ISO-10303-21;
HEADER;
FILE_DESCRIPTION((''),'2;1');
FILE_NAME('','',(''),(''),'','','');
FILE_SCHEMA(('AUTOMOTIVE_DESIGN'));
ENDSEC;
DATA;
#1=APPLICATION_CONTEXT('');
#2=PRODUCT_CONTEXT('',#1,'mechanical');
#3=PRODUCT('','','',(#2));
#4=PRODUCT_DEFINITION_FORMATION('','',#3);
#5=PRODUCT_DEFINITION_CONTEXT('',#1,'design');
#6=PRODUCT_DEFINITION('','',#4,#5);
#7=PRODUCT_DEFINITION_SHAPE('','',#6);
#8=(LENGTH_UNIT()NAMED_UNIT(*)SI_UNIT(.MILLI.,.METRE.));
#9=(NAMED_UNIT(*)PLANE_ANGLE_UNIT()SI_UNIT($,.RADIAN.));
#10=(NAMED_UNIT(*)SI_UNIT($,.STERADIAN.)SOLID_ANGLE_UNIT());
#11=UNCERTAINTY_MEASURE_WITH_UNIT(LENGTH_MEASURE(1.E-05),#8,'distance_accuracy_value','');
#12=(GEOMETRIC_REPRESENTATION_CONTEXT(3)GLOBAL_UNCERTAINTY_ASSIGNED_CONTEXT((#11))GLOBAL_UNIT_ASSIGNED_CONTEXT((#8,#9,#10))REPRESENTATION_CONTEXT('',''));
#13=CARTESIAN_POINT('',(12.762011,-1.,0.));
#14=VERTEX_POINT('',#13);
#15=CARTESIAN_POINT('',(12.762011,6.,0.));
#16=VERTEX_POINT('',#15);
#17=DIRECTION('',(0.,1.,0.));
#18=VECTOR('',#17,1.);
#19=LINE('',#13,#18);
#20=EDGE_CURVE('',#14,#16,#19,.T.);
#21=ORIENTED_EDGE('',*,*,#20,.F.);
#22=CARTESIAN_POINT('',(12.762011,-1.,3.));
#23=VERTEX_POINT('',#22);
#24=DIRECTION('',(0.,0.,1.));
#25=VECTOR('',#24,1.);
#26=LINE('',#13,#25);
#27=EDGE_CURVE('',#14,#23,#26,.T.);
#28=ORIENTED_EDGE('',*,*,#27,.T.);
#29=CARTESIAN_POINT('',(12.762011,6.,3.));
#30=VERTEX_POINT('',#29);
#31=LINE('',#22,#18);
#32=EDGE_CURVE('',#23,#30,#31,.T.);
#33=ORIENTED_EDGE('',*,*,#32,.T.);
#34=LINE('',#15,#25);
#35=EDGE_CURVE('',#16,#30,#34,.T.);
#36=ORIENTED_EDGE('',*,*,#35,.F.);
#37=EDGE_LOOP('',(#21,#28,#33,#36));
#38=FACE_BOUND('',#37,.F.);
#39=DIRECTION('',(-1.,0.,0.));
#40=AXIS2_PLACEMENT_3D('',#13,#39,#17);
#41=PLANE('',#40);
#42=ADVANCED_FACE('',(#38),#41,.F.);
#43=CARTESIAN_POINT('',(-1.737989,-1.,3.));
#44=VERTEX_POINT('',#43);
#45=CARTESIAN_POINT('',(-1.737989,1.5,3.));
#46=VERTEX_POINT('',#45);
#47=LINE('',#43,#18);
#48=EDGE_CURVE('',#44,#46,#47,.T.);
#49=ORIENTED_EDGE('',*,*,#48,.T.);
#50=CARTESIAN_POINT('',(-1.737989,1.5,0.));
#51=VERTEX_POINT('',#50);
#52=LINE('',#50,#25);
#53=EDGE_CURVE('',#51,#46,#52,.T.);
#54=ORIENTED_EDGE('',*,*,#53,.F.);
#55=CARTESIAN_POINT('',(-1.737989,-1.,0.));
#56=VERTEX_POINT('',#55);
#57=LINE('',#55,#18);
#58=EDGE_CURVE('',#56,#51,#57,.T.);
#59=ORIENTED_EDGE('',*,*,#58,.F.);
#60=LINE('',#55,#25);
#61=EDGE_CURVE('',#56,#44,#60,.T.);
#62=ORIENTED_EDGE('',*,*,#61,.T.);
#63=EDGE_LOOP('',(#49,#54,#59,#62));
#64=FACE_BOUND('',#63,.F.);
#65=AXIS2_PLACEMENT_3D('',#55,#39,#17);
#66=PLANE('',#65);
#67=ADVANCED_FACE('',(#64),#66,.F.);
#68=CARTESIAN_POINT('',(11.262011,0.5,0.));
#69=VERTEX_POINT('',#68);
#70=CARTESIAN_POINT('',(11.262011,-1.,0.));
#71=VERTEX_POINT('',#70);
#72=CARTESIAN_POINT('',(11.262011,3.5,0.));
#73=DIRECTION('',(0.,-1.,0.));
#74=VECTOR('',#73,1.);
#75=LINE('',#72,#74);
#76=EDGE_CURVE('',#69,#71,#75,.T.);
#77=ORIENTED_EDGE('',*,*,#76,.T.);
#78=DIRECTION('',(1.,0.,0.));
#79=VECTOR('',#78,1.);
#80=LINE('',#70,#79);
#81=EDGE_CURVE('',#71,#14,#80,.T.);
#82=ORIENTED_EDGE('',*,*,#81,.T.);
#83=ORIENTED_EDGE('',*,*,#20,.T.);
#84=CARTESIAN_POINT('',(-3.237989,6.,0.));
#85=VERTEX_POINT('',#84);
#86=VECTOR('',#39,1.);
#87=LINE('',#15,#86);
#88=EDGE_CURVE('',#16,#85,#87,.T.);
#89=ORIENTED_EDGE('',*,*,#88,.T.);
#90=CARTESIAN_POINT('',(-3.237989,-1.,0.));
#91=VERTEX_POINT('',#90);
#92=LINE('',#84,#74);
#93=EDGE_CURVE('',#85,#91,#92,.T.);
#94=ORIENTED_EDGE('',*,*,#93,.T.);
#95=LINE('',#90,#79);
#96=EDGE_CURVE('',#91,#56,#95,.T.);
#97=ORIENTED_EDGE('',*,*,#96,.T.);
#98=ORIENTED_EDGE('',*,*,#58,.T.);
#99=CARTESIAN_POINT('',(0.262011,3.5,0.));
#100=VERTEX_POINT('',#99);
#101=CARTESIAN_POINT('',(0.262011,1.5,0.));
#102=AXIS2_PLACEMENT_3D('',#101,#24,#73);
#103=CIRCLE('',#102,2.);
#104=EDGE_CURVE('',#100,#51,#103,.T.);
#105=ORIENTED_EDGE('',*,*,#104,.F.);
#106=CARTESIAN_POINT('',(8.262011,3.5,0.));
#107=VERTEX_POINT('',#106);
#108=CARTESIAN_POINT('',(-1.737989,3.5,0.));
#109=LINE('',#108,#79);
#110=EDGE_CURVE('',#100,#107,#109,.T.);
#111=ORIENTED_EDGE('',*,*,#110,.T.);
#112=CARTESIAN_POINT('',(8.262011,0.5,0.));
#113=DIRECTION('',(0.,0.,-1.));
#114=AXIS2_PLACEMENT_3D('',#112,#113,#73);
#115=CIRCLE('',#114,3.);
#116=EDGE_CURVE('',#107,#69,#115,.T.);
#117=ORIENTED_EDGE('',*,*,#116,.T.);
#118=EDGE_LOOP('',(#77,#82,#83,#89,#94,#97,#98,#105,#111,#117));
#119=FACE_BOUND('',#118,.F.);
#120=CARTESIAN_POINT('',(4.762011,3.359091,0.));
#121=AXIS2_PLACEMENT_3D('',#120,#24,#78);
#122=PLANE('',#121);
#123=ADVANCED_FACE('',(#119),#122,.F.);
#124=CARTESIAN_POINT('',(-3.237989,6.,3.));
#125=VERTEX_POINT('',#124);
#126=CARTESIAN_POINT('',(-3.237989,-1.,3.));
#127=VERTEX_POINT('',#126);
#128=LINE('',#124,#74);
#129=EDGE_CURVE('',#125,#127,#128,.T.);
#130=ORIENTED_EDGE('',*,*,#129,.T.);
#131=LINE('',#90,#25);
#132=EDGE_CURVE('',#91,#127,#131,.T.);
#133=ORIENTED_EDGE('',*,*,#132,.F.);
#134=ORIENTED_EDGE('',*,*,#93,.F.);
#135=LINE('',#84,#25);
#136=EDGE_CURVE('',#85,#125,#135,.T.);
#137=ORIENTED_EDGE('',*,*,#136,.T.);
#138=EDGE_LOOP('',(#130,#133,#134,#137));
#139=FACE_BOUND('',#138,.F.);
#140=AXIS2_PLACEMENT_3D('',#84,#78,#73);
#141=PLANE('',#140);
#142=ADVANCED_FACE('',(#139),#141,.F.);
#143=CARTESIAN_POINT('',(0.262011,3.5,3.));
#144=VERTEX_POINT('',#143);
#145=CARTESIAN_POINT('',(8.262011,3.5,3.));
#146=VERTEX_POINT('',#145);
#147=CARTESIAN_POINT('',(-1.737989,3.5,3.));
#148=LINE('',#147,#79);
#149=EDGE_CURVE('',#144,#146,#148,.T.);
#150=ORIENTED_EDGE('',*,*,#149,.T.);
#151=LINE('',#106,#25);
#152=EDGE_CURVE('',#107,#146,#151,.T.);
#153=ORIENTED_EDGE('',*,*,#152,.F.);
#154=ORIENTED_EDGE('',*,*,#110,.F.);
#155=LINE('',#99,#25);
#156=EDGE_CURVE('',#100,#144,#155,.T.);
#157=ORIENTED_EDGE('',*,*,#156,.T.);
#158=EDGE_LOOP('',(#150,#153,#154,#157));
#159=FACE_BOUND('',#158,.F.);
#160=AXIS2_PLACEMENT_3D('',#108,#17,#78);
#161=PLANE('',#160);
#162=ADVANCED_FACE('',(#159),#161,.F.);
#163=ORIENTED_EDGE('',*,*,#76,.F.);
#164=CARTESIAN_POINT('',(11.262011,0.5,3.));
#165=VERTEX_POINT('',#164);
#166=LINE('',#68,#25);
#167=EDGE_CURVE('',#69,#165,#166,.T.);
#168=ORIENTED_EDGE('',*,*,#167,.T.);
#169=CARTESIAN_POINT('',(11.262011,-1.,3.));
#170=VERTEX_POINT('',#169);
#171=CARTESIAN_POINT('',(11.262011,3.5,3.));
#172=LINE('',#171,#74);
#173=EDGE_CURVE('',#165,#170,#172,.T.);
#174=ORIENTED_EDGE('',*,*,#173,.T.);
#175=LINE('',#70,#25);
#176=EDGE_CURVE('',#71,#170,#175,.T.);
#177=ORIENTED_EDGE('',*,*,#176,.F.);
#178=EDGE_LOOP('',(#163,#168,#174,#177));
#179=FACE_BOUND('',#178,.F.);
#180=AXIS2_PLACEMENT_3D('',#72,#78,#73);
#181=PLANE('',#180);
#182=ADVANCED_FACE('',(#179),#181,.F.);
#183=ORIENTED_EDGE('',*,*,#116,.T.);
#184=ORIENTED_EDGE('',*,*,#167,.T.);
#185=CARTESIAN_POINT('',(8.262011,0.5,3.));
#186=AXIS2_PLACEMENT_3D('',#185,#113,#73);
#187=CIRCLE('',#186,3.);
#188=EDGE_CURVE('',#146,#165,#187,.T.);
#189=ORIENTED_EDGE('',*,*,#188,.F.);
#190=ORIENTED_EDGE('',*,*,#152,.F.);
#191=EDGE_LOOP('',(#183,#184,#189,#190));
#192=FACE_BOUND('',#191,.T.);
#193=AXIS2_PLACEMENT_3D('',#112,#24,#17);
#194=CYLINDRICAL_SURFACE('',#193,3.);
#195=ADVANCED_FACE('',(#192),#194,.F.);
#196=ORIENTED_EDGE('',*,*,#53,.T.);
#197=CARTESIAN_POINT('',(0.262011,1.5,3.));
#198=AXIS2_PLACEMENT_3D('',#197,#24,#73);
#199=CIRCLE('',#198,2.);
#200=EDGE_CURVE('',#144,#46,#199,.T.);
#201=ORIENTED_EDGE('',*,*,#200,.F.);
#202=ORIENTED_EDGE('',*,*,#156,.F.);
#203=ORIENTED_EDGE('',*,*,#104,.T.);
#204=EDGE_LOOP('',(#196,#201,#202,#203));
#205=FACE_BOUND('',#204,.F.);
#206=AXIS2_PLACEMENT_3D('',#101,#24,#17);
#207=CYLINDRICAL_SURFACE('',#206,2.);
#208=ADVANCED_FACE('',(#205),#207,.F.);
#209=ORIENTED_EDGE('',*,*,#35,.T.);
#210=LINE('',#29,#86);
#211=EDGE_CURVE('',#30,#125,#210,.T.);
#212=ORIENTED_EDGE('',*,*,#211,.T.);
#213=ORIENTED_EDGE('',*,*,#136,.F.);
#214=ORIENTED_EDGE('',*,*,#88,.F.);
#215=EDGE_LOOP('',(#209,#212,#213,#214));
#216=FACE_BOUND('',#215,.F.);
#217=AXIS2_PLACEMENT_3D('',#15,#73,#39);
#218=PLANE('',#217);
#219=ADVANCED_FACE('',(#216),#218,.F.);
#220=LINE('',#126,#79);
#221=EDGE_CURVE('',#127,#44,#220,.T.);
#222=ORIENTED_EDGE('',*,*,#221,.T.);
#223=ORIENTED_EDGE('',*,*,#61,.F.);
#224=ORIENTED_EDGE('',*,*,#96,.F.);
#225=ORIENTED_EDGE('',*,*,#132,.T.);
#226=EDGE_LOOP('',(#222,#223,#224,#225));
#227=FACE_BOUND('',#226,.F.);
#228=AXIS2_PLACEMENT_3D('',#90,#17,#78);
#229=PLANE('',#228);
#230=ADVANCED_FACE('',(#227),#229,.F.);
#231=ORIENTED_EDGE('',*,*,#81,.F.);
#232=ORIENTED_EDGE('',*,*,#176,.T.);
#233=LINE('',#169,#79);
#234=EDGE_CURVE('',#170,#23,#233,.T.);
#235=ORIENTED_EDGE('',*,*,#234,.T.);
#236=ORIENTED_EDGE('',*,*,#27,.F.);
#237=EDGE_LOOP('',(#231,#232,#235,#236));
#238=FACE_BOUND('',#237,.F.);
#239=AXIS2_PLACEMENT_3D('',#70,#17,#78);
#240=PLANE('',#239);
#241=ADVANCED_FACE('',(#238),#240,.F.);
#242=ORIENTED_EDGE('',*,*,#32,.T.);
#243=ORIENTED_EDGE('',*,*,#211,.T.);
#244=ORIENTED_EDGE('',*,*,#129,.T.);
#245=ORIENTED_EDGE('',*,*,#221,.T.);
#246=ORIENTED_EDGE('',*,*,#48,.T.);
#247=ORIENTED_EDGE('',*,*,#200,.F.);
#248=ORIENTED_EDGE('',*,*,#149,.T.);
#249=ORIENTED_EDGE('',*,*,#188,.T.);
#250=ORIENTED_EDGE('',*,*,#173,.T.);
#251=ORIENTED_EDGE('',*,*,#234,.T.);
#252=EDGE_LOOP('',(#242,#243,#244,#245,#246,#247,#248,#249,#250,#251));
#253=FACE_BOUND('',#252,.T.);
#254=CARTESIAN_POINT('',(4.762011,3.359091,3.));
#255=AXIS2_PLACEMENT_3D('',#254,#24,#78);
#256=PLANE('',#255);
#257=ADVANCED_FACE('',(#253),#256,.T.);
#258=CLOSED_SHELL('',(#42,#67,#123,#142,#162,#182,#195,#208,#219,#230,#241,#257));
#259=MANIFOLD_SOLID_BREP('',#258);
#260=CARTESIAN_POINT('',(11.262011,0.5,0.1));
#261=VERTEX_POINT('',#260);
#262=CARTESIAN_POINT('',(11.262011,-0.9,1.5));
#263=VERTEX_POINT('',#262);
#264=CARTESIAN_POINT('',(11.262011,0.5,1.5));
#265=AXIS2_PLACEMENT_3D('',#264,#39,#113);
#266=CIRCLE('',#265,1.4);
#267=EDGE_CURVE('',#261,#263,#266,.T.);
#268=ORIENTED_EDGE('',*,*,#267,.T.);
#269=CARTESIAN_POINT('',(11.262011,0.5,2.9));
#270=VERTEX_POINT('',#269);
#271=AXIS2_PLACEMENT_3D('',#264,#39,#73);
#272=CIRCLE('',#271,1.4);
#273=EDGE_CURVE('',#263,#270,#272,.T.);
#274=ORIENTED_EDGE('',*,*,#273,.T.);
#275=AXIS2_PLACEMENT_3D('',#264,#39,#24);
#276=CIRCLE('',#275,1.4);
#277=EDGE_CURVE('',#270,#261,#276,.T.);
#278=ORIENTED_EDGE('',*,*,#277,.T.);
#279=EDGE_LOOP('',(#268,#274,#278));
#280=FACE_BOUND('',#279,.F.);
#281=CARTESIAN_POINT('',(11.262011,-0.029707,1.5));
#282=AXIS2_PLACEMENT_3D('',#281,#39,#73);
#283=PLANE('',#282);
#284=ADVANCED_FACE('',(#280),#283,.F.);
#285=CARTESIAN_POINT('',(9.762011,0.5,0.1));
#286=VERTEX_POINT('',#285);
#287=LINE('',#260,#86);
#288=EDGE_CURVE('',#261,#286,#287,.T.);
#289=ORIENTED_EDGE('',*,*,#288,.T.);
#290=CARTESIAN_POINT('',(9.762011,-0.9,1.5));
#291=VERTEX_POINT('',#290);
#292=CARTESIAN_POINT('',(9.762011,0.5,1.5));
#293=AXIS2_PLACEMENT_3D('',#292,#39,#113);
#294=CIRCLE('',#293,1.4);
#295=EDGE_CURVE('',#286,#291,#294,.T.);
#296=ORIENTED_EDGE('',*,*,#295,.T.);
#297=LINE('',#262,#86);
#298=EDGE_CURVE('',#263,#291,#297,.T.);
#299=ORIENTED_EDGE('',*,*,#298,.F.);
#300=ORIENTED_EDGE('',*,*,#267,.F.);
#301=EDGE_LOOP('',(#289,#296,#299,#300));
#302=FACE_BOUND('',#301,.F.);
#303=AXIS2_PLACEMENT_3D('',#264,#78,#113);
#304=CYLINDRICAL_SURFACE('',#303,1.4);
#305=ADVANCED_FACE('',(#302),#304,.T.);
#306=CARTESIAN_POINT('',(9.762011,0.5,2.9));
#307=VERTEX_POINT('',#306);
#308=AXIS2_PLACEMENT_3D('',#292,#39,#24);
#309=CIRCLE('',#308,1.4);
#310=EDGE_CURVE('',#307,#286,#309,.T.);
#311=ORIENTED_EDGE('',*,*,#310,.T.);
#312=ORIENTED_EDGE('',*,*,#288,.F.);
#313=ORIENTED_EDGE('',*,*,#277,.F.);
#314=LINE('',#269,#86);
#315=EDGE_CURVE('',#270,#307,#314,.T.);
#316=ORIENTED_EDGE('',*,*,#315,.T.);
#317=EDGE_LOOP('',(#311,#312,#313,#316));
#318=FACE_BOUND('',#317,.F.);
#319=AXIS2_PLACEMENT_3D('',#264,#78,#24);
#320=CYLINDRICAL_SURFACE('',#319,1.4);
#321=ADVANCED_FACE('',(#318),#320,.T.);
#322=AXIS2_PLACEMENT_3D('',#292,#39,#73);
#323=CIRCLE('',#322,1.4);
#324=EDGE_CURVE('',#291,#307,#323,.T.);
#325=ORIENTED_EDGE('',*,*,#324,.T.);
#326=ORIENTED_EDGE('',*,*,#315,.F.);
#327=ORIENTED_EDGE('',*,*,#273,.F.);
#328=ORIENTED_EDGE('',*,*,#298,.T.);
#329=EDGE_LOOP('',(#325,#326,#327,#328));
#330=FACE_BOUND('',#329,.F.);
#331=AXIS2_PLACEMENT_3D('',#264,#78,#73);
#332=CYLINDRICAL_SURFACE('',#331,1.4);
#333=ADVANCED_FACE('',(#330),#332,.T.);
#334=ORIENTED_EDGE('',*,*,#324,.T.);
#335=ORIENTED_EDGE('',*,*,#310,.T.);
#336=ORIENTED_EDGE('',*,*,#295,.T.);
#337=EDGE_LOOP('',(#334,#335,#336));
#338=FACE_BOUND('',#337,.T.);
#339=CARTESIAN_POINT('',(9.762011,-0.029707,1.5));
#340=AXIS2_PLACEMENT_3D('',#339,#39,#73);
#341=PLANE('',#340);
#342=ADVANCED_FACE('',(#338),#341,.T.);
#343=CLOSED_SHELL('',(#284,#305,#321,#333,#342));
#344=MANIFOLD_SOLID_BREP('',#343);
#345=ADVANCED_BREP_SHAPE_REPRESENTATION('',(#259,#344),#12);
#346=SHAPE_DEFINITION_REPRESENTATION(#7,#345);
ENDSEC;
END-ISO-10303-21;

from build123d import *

# Parameters (mm, degrees)
F1_DEPTH = 3
F2_R     = 3
F3_R     = 2
F5_DEPTH = 1.5


with BuildPart() as f1:
    # F0 (on Top) → F1 (new body)
    with BuildSketch(Plane.XY):
        Polygon((-3.2379887671, -1), (-1.7379887671, -1), (-1.7379887671, 3.5), (11.2620112329, 3.5), (11.2620112329, -1), (12.7620112329, -1), (12.7620112329, 6), (-3.2379887671, 6), align=None)
    extrude(amount=F1_DEPTH)

    # F2
    f2_edges = [f1.edges().sort_by_distance(p)[0] for p in [
        (11.262011, 3.5, 1.5),
    ]]
    fillet(f2_edges, radius=F2_R)

    # F3
    f3_edges = [f1.edges().sort_by_distance(p)[0] for p in [
        (-1.737989, 3.5, 1.5),
    ]]
    fillet(f3_edges, radius=F3_R)


with BuildPart() as f5:
    # F4 (on face) → F5 (new body)
    with BuildSketch(Plane(origin=(11.2620112329, 0, 0), x_dir=(0, -1, 0), z_dir=(-1, 0, 0))):
        with BuildLine():
            ThreePointArc((-0.5, 0.1), (0.4899494937, 0.5100505063), (0.9, 1.5))
            ThreePointArc((0.9, 1.5), (0.4899494937, 2.4899494937), (-0.5, 2.9))
            Line((-0.5, 2.9), (-0.5, 0.1))
        make_face()
        with BuildLine():
            Line((-0.5, 0.1), (-0.5, 2.9))
            ThreePointArc((-0.5, 2.9), (-1.9, 1.5), (-0.5, 0.1))
        make_face()
    extrude(amount=F5_DEPTH)


solid = Compound([f1.part, f5.part])
